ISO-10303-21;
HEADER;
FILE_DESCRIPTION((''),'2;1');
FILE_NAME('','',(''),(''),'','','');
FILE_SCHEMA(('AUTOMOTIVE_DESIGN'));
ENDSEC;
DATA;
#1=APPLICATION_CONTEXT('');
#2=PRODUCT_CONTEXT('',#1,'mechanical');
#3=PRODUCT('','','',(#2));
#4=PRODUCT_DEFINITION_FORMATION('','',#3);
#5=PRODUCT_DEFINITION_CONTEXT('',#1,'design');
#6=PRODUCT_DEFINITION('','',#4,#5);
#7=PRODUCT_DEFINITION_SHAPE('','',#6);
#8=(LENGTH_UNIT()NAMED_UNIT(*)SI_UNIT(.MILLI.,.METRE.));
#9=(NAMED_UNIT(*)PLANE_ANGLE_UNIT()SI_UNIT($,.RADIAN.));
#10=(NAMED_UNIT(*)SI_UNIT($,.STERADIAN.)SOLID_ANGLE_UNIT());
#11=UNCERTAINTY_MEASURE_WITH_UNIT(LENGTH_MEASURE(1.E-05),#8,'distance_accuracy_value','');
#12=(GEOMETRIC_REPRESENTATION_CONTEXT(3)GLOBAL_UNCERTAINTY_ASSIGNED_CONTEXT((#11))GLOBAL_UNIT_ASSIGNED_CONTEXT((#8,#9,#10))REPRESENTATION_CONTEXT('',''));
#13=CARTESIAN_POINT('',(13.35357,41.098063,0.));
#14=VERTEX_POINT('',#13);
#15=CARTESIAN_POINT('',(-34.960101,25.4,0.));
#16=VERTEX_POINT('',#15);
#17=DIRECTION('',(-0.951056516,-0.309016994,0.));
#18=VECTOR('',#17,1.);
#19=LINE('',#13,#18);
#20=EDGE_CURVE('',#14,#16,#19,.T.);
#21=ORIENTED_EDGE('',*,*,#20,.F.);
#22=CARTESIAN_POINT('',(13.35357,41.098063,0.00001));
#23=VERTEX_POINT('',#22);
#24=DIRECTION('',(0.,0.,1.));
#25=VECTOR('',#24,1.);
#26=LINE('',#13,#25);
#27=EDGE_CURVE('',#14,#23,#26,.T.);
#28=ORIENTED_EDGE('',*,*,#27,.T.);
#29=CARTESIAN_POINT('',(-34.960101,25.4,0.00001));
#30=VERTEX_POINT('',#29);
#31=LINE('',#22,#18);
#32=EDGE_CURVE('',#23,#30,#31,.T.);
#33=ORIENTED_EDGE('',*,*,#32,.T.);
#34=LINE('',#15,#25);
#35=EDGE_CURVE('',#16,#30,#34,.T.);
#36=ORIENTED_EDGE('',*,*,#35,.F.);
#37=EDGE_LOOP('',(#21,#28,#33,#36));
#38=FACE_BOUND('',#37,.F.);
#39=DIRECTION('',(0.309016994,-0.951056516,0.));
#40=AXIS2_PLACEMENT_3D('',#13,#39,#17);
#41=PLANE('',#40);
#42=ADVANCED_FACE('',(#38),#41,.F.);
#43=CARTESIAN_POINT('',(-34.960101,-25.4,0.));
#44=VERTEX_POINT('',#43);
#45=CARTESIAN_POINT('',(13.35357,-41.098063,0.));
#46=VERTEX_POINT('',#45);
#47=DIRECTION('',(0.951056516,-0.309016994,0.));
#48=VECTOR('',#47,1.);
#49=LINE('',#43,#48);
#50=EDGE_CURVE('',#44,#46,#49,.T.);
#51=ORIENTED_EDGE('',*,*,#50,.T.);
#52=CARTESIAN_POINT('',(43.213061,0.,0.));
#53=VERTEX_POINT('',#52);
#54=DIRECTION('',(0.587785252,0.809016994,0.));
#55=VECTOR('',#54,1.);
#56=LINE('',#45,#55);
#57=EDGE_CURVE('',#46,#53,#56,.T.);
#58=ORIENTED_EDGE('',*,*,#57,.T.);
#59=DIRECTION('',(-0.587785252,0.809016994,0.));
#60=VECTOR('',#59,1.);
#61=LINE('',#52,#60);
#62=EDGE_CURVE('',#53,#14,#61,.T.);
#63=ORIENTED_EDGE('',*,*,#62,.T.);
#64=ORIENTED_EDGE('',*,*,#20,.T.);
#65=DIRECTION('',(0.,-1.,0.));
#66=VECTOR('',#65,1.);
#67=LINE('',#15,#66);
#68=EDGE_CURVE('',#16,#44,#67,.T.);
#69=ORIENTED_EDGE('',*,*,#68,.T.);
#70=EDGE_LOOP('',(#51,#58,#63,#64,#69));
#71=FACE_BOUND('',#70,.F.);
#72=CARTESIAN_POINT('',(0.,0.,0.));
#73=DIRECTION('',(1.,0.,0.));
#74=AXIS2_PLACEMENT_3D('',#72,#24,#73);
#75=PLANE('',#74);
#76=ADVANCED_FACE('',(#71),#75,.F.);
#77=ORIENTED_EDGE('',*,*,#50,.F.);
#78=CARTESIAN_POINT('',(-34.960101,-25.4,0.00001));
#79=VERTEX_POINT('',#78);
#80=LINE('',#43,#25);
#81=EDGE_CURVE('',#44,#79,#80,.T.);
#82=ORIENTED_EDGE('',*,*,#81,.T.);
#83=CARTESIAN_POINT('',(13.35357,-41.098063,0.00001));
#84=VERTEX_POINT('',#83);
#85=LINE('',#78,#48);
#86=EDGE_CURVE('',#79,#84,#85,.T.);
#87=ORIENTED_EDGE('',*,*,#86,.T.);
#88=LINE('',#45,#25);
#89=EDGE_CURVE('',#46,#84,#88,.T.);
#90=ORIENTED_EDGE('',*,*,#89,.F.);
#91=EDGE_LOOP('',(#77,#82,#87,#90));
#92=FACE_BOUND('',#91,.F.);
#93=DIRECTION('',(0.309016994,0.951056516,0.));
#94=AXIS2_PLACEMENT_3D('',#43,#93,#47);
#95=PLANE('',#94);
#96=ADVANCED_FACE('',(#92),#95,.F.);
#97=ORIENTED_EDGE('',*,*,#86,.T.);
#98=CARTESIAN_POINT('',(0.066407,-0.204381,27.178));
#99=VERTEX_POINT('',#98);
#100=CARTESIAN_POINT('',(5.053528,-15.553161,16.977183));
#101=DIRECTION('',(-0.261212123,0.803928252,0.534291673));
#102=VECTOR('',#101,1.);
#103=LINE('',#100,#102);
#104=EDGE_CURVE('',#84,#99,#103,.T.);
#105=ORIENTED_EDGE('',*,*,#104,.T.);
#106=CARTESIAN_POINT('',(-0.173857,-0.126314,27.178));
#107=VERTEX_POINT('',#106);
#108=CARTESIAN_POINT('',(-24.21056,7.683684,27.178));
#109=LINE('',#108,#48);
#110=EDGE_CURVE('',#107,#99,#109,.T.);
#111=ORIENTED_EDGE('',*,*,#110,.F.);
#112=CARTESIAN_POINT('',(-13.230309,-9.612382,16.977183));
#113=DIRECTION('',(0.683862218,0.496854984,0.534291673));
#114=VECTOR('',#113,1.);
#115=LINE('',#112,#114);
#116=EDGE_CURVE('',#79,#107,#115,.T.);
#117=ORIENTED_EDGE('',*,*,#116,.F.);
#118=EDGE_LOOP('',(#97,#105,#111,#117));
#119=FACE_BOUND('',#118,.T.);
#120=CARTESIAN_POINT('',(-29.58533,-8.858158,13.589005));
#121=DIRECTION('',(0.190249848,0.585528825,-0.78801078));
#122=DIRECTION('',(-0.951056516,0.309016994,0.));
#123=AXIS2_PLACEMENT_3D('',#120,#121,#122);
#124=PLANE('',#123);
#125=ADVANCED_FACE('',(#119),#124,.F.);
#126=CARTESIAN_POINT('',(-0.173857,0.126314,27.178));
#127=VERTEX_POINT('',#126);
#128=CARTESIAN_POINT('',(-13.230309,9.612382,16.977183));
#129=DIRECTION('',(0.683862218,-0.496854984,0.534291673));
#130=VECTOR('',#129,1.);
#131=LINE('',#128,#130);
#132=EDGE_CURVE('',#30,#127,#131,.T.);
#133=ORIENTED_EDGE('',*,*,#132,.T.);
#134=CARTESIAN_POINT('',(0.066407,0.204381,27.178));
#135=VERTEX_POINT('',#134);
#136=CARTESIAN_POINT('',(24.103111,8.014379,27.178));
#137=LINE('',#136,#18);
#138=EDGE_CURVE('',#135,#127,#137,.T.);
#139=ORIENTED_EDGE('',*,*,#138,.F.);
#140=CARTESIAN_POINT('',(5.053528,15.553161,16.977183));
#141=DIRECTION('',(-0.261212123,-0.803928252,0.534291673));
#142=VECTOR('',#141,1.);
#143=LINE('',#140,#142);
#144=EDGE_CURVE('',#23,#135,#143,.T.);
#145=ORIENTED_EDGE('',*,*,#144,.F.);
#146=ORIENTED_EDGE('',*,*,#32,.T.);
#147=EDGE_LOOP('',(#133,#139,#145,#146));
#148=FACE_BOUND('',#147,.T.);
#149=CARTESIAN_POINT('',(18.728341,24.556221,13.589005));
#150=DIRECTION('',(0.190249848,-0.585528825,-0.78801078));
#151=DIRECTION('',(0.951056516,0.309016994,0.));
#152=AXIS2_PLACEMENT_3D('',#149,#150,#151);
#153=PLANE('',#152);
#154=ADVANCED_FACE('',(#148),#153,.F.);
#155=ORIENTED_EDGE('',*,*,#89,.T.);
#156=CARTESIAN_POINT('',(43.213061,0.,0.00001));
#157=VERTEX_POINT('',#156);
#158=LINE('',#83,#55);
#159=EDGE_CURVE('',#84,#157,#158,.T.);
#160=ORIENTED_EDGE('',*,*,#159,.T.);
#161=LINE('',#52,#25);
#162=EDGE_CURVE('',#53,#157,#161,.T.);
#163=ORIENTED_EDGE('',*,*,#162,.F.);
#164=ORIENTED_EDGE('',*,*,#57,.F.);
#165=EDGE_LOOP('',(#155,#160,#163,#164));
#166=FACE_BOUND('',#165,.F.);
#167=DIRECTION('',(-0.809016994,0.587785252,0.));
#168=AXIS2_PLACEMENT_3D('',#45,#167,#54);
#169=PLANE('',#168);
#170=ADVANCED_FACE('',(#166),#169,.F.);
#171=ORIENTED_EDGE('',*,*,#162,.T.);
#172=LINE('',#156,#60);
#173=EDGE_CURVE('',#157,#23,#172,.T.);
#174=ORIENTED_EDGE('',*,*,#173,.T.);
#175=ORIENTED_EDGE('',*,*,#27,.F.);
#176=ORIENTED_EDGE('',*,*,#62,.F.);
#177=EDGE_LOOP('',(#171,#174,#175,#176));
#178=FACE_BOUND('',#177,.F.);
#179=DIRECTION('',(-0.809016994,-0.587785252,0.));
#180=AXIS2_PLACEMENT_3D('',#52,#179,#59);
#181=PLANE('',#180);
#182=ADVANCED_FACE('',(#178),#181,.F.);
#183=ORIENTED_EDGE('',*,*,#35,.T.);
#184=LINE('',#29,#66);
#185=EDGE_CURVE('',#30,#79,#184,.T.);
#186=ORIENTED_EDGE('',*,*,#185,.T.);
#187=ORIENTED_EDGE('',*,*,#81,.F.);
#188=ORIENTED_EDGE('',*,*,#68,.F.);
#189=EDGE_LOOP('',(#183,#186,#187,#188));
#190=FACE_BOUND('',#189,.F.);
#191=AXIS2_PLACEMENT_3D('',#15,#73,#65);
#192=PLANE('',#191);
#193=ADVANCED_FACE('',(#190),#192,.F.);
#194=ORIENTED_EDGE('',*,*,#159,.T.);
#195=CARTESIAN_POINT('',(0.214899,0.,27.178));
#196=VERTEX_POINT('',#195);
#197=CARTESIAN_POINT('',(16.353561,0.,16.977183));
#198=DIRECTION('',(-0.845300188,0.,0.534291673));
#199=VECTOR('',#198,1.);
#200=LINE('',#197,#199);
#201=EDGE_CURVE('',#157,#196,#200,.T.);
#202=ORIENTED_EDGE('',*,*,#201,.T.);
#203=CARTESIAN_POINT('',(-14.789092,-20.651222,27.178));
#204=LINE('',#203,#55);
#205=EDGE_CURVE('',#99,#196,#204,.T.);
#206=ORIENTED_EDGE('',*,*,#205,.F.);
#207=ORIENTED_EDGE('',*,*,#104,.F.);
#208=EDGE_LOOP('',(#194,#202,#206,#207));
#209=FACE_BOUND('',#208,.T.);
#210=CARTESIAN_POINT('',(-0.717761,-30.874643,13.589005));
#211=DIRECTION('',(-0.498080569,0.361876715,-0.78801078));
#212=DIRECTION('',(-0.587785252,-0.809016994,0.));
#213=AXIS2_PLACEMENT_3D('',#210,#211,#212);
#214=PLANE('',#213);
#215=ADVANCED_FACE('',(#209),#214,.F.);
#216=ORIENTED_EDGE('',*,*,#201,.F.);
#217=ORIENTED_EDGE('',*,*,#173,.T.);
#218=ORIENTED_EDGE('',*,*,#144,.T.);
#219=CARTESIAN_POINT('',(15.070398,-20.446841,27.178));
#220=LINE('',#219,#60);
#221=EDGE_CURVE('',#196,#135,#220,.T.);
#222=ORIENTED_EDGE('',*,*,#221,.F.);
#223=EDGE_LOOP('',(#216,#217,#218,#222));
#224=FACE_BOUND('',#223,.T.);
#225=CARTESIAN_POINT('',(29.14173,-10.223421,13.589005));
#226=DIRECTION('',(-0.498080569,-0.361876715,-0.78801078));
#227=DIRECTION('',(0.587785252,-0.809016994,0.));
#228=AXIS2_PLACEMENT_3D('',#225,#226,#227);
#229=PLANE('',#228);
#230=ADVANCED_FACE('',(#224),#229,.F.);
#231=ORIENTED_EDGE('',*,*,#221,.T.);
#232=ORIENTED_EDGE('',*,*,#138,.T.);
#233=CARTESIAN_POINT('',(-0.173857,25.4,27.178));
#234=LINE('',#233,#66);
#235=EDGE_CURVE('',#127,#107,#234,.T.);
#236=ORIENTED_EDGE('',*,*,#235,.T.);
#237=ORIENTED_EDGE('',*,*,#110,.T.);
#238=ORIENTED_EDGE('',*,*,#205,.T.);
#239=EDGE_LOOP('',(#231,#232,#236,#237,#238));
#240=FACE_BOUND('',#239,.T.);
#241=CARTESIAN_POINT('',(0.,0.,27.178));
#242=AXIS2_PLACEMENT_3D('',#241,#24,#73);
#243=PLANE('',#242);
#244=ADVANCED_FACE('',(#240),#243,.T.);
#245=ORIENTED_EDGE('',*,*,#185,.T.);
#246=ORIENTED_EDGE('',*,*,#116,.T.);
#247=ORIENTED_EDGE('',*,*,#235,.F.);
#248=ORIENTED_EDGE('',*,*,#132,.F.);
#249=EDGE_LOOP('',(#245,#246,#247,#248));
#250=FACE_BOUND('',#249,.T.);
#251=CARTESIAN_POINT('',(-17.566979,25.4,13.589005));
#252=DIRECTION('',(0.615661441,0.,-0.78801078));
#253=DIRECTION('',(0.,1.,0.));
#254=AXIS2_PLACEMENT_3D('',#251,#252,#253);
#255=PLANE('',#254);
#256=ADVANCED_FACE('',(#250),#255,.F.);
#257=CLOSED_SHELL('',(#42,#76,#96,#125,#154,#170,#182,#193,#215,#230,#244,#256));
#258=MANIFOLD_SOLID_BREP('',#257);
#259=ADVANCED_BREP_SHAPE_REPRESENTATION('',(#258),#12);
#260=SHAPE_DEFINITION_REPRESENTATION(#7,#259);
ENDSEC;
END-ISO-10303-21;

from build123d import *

# Parameters (mm, degrees)
F1_DEPTH = 27.178
F2_SIZE2 = 34.786244
F2_SIZE  = 27.17799


# Not quite as in the source:
# - a fillet or chamfer is up to 0.001 mm smaller than in the source, because OpenCascade refuses the exact size


with BuildPart() as f1:
    # F0 (on Top) → F1 (new body)
    with BuildSketch(Plane.XY):
        Polygon((-34.96010078, -25.4), (13.3535702478, -41.0980633142), (43.2130610643, 0), (13.3535702478, 41.0980633142), (-34.96010078, 25.4), align=None)
    extrude(amount=F1_DEPTH)

    # F2 (size 27.178 and 34.7862536797 in the source; OpenCascade refuses exactly that, so slightly less here)
    f2_edges = [f1.edges().sort_by_distance(p)[0] for p in [
        (28.283316, -20.549032, 27.178),
        (-10.803265, 33.249032, 27.178),
        (-34.960101, 0, 27.178),
        (-10.803265, -33.249032, 27.178),
        (28.283316, 20.549032, 27.178),
    ]]
    chamfer(f2_edges, length=F2_SIZE, length2=F2_SIZE2)


solid = f1.part
